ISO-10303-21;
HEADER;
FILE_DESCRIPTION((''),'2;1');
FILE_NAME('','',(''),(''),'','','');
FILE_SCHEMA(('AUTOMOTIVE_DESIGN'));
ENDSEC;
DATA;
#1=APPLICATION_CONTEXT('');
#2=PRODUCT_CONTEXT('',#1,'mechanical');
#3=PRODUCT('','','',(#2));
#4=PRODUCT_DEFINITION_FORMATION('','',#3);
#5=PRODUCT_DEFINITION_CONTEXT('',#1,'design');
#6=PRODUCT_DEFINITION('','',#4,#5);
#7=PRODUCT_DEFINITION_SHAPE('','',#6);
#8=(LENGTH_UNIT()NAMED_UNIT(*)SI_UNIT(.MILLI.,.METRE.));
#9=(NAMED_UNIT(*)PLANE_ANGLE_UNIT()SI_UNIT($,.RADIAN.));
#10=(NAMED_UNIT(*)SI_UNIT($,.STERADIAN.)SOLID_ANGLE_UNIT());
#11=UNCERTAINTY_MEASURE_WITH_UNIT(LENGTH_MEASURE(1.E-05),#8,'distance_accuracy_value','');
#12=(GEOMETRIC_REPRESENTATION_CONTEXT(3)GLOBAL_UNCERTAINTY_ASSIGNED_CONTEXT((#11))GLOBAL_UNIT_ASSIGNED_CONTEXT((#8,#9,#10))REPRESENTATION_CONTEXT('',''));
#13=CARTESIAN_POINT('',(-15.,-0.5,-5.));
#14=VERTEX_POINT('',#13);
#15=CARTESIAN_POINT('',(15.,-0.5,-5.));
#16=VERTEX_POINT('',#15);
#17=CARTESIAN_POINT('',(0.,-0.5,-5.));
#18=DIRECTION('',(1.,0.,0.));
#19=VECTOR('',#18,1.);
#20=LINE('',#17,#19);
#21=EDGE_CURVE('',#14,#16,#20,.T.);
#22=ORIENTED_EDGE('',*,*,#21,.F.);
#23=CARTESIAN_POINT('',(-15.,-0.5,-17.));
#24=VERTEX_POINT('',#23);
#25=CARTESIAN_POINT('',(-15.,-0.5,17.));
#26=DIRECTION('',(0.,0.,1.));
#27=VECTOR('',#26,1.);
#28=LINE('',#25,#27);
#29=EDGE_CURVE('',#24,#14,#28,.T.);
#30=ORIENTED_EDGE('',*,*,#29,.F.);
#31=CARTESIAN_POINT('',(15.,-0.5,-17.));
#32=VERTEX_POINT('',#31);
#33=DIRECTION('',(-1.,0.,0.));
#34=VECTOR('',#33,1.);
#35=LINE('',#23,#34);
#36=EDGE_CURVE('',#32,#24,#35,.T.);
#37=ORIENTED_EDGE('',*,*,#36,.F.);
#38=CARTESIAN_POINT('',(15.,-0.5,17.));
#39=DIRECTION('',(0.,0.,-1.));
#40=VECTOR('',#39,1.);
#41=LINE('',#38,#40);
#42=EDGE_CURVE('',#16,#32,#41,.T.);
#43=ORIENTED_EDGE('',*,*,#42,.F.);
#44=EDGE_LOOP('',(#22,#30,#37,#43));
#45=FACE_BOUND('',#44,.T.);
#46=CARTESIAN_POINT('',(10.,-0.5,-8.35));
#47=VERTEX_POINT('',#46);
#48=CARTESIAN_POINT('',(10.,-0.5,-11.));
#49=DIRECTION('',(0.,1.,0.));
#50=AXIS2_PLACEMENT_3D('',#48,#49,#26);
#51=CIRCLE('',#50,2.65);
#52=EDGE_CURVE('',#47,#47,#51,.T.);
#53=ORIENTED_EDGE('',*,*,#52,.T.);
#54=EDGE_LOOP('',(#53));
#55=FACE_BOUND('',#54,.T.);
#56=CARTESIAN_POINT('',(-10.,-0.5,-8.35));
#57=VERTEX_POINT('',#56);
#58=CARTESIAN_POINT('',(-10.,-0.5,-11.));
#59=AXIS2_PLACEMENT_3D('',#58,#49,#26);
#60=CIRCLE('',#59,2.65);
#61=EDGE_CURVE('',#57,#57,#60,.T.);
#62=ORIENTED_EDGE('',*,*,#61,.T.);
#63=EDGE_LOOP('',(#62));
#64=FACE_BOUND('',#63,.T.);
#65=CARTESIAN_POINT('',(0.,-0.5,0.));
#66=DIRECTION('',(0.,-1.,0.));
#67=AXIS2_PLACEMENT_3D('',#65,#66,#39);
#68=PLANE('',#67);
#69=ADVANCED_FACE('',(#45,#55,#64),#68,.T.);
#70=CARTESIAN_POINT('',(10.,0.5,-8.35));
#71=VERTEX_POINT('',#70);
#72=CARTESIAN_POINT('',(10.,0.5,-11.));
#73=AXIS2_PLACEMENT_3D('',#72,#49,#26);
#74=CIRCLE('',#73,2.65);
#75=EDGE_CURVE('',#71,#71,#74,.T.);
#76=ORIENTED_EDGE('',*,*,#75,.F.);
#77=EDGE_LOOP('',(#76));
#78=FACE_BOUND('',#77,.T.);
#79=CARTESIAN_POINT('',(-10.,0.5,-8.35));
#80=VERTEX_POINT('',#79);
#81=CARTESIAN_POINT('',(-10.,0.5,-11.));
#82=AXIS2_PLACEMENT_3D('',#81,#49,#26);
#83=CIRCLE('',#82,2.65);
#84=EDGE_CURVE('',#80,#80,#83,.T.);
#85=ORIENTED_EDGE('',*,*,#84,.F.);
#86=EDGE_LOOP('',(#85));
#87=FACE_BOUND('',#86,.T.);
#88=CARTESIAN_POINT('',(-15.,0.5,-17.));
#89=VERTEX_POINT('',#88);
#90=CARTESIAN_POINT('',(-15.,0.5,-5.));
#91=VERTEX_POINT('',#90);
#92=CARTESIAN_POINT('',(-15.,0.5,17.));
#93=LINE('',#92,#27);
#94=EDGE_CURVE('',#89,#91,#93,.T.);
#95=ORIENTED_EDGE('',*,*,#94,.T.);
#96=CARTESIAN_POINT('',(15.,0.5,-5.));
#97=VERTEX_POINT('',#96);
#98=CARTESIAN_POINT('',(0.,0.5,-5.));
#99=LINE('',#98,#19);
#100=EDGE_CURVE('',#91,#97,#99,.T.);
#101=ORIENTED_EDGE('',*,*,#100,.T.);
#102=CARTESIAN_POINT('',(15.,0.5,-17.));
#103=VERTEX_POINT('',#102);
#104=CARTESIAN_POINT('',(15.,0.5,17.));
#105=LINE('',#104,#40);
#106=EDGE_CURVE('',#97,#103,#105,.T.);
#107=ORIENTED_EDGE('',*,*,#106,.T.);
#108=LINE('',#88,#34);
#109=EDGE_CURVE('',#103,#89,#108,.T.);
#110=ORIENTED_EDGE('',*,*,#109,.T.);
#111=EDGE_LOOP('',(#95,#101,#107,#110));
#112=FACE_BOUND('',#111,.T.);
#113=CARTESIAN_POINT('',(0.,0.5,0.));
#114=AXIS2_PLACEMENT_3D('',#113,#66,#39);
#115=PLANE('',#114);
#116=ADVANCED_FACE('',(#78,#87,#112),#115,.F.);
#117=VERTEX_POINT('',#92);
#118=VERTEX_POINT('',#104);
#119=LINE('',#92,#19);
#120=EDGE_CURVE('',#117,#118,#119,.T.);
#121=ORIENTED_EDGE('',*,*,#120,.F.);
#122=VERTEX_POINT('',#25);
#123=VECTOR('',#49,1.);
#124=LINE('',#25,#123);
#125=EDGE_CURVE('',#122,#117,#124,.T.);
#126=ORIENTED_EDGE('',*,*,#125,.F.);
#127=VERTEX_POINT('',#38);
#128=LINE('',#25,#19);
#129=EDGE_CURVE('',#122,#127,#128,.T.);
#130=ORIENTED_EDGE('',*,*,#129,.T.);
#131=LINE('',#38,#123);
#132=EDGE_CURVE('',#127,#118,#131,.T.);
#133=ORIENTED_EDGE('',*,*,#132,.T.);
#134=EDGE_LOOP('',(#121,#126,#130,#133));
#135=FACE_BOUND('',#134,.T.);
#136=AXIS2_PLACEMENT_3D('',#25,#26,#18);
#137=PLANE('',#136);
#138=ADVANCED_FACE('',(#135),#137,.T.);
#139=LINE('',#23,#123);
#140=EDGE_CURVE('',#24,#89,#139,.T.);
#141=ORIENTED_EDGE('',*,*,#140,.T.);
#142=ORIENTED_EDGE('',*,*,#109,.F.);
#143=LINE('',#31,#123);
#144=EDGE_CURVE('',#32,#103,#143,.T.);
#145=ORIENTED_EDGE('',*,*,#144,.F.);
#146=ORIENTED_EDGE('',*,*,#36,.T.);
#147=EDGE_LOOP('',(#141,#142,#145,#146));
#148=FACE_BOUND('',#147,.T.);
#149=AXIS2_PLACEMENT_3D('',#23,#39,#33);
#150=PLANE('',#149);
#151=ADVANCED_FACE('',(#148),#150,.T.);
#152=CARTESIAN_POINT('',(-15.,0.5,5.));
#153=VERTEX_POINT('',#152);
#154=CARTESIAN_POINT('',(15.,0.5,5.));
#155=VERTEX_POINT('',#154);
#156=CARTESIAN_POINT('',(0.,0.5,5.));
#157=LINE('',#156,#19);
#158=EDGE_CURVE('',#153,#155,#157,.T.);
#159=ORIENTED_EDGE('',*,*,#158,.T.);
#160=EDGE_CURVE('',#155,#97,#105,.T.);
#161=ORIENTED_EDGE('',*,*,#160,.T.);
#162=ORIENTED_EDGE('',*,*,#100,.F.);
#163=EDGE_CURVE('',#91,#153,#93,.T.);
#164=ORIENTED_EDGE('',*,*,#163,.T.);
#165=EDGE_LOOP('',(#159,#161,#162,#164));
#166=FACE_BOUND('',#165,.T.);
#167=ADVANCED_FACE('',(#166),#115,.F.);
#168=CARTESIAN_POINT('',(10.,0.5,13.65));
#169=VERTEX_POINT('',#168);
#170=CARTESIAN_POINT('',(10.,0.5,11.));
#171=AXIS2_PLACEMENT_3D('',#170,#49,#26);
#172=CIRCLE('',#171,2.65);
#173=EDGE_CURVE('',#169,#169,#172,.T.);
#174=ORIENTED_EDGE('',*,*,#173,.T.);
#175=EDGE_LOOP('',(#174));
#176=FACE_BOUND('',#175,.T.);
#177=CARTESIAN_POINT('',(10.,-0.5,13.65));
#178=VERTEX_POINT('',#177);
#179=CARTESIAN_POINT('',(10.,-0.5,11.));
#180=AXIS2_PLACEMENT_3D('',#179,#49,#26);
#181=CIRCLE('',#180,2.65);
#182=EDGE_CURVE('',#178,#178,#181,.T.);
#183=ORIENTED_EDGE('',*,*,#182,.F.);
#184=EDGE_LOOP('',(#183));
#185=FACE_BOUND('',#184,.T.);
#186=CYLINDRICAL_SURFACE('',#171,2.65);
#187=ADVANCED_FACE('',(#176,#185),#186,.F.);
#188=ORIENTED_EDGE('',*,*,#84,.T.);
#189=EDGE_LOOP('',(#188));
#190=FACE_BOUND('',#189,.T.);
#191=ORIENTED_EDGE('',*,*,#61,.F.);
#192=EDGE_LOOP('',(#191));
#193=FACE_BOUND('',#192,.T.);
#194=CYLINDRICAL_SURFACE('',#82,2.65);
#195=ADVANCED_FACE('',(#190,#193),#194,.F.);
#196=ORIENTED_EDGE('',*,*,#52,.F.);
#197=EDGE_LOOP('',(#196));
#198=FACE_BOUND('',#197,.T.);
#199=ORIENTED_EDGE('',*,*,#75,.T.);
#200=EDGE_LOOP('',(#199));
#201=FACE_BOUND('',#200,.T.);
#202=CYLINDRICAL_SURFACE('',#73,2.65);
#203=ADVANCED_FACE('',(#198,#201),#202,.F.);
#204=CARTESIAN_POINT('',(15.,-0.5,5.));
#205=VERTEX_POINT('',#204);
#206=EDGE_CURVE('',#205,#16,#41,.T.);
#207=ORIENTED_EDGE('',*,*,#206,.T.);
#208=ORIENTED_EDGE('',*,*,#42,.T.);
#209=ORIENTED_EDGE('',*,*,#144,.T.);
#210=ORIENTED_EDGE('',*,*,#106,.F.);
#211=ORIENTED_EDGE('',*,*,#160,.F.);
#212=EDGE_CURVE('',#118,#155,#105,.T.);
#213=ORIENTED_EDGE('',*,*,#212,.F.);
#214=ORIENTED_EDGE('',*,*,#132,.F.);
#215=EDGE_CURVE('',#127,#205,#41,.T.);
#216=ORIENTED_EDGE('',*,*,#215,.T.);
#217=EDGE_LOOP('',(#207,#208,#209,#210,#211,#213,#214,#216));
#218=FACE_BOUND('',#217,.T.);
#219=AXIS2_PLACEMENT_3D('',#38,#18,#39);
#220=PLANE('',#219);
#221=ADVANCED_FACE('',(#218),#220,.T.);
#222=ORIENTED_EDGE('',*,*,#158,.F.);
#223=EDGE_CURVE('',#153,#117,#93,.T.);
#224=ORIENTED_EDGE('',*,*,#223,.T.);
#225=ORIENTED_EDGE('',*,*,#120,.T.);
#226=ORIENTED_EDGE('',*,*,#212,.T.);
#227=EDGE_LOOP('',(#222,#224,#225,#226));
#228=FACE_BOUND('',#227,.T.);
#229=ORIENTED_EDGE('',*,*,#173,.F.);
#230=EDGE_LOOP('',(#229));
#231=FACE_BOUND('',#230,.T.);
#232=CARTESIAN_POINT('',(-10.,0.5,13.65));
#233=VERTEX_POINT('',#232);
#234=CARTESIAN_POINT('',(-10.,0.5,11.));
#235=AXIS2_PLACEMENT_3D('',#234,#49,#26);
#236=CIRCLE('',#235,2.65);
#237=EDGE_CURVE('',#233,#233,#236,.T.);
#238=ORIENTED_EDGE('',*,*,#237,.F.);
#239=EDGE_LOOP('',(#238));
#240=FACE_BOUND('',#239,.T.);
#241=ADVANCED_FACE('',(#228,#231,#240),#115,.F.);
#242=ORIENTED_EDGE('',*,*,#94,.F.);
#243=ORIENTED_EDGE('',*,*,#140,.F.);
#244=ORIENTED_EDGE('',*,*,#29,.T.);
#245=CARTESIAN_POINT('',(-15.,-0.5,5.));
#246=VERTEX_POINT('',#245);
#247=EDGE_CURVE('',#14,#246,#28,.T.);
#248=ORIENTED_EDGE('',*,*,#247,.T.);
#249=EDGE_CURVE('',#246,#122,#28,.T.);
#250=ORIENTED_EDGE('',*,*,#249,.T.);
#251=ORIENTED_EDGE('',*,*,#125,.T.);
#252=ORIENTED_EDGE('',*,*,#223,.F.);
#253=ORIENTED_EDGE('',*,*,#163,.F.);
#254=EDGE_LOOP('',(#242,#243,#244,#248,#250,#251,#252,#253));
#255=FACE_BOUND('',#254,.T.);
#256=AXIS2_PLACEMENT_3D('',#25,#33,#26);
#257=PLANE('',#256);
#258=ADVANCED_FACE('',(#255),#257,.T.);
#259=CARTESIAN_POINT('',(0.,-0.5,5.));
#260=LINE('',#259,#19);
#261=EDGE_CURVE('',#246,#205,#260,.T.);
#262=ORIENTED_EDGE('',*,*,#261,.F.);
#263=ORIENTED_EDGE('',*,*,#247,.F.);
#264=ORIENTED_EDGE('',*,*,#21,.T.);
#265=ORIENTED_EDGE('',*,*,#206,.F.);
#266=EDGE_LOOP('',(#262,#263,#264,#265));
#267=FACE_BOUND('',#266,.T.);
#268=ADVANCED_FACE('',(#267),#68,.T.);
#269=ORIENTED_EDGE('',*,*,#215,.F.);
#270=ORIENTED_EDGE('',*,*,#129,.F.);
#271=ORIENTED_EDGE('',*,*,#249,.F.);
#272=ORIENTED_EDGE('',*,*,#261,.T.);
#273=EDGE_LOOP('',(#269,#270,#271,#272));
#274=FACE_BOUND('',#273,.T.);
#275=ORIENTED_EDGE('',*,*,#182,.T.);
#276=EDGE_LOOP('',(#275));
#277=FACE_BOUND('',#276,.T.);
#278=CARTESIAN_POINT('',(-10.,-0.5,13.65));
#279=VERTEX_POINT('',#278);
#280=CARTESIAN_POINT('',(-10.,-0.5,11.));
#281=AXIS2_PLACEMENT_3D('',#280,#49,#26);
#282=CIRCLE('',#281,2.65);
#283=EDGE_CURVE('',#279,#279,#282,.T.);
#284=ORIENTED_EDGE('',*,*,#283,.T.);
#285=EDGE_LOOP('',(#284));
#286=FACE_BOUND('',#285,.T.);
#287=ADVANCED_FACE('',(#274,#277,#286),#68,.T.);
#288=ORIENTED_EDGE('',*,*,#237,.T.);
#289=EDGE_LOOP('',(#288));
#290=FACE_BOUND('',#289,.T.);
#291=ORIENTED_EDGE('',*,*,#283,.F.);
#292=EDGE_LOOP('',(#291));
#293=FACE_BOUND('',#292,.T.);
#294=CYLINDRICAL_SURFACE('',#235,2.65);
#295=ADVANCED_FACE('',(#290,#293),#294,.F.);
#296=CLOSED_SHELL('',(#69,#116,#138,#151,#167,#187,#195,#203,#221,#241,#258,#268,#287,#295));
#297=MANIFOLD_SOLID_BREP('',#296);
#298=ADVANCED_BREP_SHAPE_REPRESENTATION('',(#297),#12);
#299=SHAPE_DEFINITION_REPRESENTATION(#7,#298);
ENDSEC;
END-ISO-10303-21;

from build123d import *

# Parameters (mm, degrees)
BASE_FLANGE1_START     = -0.5
BASE_FLANGE1_OUTLINE_W = 30
BASE_FLANGE1_OUTLINE_H = 34
BASE_FLANGE1_DEPTH     = 1
M5_CLEARANCE_HOLE2_D   = 5.3


# Read off the part's stored shape, not the designer's step: Base-Flange1
with BuildPart() as part:
    # Base-Flange1 outline → Base-Flange1 (new body)
    with BuildSketch(Plane(origin=(0, 0, 0), x_dir=(1, 0, 0), z_dir=(0, 1, 0)).offset(BASE_FLANGE1_START)):
        Rectangle(BASE_FLANGE1_OUTLINE_W, BASE_FLANGE1_OUTLINE_H)
    extrude(amount=BASE_FLANGE1_DEPTH)

    # M5 Clearance Hole2 (through all)
    with Locations(Plane(origin=(0, 0.5, 0), x_dir=(1, 0, 0), z_dir=(0, 1, 0))):
        with Locations((-10, -11), (10, -11), (-10, 11), (10, 11)):
            Hole(M5_CLEARANCE_HOLE2_D / 2)


solid = part.part
